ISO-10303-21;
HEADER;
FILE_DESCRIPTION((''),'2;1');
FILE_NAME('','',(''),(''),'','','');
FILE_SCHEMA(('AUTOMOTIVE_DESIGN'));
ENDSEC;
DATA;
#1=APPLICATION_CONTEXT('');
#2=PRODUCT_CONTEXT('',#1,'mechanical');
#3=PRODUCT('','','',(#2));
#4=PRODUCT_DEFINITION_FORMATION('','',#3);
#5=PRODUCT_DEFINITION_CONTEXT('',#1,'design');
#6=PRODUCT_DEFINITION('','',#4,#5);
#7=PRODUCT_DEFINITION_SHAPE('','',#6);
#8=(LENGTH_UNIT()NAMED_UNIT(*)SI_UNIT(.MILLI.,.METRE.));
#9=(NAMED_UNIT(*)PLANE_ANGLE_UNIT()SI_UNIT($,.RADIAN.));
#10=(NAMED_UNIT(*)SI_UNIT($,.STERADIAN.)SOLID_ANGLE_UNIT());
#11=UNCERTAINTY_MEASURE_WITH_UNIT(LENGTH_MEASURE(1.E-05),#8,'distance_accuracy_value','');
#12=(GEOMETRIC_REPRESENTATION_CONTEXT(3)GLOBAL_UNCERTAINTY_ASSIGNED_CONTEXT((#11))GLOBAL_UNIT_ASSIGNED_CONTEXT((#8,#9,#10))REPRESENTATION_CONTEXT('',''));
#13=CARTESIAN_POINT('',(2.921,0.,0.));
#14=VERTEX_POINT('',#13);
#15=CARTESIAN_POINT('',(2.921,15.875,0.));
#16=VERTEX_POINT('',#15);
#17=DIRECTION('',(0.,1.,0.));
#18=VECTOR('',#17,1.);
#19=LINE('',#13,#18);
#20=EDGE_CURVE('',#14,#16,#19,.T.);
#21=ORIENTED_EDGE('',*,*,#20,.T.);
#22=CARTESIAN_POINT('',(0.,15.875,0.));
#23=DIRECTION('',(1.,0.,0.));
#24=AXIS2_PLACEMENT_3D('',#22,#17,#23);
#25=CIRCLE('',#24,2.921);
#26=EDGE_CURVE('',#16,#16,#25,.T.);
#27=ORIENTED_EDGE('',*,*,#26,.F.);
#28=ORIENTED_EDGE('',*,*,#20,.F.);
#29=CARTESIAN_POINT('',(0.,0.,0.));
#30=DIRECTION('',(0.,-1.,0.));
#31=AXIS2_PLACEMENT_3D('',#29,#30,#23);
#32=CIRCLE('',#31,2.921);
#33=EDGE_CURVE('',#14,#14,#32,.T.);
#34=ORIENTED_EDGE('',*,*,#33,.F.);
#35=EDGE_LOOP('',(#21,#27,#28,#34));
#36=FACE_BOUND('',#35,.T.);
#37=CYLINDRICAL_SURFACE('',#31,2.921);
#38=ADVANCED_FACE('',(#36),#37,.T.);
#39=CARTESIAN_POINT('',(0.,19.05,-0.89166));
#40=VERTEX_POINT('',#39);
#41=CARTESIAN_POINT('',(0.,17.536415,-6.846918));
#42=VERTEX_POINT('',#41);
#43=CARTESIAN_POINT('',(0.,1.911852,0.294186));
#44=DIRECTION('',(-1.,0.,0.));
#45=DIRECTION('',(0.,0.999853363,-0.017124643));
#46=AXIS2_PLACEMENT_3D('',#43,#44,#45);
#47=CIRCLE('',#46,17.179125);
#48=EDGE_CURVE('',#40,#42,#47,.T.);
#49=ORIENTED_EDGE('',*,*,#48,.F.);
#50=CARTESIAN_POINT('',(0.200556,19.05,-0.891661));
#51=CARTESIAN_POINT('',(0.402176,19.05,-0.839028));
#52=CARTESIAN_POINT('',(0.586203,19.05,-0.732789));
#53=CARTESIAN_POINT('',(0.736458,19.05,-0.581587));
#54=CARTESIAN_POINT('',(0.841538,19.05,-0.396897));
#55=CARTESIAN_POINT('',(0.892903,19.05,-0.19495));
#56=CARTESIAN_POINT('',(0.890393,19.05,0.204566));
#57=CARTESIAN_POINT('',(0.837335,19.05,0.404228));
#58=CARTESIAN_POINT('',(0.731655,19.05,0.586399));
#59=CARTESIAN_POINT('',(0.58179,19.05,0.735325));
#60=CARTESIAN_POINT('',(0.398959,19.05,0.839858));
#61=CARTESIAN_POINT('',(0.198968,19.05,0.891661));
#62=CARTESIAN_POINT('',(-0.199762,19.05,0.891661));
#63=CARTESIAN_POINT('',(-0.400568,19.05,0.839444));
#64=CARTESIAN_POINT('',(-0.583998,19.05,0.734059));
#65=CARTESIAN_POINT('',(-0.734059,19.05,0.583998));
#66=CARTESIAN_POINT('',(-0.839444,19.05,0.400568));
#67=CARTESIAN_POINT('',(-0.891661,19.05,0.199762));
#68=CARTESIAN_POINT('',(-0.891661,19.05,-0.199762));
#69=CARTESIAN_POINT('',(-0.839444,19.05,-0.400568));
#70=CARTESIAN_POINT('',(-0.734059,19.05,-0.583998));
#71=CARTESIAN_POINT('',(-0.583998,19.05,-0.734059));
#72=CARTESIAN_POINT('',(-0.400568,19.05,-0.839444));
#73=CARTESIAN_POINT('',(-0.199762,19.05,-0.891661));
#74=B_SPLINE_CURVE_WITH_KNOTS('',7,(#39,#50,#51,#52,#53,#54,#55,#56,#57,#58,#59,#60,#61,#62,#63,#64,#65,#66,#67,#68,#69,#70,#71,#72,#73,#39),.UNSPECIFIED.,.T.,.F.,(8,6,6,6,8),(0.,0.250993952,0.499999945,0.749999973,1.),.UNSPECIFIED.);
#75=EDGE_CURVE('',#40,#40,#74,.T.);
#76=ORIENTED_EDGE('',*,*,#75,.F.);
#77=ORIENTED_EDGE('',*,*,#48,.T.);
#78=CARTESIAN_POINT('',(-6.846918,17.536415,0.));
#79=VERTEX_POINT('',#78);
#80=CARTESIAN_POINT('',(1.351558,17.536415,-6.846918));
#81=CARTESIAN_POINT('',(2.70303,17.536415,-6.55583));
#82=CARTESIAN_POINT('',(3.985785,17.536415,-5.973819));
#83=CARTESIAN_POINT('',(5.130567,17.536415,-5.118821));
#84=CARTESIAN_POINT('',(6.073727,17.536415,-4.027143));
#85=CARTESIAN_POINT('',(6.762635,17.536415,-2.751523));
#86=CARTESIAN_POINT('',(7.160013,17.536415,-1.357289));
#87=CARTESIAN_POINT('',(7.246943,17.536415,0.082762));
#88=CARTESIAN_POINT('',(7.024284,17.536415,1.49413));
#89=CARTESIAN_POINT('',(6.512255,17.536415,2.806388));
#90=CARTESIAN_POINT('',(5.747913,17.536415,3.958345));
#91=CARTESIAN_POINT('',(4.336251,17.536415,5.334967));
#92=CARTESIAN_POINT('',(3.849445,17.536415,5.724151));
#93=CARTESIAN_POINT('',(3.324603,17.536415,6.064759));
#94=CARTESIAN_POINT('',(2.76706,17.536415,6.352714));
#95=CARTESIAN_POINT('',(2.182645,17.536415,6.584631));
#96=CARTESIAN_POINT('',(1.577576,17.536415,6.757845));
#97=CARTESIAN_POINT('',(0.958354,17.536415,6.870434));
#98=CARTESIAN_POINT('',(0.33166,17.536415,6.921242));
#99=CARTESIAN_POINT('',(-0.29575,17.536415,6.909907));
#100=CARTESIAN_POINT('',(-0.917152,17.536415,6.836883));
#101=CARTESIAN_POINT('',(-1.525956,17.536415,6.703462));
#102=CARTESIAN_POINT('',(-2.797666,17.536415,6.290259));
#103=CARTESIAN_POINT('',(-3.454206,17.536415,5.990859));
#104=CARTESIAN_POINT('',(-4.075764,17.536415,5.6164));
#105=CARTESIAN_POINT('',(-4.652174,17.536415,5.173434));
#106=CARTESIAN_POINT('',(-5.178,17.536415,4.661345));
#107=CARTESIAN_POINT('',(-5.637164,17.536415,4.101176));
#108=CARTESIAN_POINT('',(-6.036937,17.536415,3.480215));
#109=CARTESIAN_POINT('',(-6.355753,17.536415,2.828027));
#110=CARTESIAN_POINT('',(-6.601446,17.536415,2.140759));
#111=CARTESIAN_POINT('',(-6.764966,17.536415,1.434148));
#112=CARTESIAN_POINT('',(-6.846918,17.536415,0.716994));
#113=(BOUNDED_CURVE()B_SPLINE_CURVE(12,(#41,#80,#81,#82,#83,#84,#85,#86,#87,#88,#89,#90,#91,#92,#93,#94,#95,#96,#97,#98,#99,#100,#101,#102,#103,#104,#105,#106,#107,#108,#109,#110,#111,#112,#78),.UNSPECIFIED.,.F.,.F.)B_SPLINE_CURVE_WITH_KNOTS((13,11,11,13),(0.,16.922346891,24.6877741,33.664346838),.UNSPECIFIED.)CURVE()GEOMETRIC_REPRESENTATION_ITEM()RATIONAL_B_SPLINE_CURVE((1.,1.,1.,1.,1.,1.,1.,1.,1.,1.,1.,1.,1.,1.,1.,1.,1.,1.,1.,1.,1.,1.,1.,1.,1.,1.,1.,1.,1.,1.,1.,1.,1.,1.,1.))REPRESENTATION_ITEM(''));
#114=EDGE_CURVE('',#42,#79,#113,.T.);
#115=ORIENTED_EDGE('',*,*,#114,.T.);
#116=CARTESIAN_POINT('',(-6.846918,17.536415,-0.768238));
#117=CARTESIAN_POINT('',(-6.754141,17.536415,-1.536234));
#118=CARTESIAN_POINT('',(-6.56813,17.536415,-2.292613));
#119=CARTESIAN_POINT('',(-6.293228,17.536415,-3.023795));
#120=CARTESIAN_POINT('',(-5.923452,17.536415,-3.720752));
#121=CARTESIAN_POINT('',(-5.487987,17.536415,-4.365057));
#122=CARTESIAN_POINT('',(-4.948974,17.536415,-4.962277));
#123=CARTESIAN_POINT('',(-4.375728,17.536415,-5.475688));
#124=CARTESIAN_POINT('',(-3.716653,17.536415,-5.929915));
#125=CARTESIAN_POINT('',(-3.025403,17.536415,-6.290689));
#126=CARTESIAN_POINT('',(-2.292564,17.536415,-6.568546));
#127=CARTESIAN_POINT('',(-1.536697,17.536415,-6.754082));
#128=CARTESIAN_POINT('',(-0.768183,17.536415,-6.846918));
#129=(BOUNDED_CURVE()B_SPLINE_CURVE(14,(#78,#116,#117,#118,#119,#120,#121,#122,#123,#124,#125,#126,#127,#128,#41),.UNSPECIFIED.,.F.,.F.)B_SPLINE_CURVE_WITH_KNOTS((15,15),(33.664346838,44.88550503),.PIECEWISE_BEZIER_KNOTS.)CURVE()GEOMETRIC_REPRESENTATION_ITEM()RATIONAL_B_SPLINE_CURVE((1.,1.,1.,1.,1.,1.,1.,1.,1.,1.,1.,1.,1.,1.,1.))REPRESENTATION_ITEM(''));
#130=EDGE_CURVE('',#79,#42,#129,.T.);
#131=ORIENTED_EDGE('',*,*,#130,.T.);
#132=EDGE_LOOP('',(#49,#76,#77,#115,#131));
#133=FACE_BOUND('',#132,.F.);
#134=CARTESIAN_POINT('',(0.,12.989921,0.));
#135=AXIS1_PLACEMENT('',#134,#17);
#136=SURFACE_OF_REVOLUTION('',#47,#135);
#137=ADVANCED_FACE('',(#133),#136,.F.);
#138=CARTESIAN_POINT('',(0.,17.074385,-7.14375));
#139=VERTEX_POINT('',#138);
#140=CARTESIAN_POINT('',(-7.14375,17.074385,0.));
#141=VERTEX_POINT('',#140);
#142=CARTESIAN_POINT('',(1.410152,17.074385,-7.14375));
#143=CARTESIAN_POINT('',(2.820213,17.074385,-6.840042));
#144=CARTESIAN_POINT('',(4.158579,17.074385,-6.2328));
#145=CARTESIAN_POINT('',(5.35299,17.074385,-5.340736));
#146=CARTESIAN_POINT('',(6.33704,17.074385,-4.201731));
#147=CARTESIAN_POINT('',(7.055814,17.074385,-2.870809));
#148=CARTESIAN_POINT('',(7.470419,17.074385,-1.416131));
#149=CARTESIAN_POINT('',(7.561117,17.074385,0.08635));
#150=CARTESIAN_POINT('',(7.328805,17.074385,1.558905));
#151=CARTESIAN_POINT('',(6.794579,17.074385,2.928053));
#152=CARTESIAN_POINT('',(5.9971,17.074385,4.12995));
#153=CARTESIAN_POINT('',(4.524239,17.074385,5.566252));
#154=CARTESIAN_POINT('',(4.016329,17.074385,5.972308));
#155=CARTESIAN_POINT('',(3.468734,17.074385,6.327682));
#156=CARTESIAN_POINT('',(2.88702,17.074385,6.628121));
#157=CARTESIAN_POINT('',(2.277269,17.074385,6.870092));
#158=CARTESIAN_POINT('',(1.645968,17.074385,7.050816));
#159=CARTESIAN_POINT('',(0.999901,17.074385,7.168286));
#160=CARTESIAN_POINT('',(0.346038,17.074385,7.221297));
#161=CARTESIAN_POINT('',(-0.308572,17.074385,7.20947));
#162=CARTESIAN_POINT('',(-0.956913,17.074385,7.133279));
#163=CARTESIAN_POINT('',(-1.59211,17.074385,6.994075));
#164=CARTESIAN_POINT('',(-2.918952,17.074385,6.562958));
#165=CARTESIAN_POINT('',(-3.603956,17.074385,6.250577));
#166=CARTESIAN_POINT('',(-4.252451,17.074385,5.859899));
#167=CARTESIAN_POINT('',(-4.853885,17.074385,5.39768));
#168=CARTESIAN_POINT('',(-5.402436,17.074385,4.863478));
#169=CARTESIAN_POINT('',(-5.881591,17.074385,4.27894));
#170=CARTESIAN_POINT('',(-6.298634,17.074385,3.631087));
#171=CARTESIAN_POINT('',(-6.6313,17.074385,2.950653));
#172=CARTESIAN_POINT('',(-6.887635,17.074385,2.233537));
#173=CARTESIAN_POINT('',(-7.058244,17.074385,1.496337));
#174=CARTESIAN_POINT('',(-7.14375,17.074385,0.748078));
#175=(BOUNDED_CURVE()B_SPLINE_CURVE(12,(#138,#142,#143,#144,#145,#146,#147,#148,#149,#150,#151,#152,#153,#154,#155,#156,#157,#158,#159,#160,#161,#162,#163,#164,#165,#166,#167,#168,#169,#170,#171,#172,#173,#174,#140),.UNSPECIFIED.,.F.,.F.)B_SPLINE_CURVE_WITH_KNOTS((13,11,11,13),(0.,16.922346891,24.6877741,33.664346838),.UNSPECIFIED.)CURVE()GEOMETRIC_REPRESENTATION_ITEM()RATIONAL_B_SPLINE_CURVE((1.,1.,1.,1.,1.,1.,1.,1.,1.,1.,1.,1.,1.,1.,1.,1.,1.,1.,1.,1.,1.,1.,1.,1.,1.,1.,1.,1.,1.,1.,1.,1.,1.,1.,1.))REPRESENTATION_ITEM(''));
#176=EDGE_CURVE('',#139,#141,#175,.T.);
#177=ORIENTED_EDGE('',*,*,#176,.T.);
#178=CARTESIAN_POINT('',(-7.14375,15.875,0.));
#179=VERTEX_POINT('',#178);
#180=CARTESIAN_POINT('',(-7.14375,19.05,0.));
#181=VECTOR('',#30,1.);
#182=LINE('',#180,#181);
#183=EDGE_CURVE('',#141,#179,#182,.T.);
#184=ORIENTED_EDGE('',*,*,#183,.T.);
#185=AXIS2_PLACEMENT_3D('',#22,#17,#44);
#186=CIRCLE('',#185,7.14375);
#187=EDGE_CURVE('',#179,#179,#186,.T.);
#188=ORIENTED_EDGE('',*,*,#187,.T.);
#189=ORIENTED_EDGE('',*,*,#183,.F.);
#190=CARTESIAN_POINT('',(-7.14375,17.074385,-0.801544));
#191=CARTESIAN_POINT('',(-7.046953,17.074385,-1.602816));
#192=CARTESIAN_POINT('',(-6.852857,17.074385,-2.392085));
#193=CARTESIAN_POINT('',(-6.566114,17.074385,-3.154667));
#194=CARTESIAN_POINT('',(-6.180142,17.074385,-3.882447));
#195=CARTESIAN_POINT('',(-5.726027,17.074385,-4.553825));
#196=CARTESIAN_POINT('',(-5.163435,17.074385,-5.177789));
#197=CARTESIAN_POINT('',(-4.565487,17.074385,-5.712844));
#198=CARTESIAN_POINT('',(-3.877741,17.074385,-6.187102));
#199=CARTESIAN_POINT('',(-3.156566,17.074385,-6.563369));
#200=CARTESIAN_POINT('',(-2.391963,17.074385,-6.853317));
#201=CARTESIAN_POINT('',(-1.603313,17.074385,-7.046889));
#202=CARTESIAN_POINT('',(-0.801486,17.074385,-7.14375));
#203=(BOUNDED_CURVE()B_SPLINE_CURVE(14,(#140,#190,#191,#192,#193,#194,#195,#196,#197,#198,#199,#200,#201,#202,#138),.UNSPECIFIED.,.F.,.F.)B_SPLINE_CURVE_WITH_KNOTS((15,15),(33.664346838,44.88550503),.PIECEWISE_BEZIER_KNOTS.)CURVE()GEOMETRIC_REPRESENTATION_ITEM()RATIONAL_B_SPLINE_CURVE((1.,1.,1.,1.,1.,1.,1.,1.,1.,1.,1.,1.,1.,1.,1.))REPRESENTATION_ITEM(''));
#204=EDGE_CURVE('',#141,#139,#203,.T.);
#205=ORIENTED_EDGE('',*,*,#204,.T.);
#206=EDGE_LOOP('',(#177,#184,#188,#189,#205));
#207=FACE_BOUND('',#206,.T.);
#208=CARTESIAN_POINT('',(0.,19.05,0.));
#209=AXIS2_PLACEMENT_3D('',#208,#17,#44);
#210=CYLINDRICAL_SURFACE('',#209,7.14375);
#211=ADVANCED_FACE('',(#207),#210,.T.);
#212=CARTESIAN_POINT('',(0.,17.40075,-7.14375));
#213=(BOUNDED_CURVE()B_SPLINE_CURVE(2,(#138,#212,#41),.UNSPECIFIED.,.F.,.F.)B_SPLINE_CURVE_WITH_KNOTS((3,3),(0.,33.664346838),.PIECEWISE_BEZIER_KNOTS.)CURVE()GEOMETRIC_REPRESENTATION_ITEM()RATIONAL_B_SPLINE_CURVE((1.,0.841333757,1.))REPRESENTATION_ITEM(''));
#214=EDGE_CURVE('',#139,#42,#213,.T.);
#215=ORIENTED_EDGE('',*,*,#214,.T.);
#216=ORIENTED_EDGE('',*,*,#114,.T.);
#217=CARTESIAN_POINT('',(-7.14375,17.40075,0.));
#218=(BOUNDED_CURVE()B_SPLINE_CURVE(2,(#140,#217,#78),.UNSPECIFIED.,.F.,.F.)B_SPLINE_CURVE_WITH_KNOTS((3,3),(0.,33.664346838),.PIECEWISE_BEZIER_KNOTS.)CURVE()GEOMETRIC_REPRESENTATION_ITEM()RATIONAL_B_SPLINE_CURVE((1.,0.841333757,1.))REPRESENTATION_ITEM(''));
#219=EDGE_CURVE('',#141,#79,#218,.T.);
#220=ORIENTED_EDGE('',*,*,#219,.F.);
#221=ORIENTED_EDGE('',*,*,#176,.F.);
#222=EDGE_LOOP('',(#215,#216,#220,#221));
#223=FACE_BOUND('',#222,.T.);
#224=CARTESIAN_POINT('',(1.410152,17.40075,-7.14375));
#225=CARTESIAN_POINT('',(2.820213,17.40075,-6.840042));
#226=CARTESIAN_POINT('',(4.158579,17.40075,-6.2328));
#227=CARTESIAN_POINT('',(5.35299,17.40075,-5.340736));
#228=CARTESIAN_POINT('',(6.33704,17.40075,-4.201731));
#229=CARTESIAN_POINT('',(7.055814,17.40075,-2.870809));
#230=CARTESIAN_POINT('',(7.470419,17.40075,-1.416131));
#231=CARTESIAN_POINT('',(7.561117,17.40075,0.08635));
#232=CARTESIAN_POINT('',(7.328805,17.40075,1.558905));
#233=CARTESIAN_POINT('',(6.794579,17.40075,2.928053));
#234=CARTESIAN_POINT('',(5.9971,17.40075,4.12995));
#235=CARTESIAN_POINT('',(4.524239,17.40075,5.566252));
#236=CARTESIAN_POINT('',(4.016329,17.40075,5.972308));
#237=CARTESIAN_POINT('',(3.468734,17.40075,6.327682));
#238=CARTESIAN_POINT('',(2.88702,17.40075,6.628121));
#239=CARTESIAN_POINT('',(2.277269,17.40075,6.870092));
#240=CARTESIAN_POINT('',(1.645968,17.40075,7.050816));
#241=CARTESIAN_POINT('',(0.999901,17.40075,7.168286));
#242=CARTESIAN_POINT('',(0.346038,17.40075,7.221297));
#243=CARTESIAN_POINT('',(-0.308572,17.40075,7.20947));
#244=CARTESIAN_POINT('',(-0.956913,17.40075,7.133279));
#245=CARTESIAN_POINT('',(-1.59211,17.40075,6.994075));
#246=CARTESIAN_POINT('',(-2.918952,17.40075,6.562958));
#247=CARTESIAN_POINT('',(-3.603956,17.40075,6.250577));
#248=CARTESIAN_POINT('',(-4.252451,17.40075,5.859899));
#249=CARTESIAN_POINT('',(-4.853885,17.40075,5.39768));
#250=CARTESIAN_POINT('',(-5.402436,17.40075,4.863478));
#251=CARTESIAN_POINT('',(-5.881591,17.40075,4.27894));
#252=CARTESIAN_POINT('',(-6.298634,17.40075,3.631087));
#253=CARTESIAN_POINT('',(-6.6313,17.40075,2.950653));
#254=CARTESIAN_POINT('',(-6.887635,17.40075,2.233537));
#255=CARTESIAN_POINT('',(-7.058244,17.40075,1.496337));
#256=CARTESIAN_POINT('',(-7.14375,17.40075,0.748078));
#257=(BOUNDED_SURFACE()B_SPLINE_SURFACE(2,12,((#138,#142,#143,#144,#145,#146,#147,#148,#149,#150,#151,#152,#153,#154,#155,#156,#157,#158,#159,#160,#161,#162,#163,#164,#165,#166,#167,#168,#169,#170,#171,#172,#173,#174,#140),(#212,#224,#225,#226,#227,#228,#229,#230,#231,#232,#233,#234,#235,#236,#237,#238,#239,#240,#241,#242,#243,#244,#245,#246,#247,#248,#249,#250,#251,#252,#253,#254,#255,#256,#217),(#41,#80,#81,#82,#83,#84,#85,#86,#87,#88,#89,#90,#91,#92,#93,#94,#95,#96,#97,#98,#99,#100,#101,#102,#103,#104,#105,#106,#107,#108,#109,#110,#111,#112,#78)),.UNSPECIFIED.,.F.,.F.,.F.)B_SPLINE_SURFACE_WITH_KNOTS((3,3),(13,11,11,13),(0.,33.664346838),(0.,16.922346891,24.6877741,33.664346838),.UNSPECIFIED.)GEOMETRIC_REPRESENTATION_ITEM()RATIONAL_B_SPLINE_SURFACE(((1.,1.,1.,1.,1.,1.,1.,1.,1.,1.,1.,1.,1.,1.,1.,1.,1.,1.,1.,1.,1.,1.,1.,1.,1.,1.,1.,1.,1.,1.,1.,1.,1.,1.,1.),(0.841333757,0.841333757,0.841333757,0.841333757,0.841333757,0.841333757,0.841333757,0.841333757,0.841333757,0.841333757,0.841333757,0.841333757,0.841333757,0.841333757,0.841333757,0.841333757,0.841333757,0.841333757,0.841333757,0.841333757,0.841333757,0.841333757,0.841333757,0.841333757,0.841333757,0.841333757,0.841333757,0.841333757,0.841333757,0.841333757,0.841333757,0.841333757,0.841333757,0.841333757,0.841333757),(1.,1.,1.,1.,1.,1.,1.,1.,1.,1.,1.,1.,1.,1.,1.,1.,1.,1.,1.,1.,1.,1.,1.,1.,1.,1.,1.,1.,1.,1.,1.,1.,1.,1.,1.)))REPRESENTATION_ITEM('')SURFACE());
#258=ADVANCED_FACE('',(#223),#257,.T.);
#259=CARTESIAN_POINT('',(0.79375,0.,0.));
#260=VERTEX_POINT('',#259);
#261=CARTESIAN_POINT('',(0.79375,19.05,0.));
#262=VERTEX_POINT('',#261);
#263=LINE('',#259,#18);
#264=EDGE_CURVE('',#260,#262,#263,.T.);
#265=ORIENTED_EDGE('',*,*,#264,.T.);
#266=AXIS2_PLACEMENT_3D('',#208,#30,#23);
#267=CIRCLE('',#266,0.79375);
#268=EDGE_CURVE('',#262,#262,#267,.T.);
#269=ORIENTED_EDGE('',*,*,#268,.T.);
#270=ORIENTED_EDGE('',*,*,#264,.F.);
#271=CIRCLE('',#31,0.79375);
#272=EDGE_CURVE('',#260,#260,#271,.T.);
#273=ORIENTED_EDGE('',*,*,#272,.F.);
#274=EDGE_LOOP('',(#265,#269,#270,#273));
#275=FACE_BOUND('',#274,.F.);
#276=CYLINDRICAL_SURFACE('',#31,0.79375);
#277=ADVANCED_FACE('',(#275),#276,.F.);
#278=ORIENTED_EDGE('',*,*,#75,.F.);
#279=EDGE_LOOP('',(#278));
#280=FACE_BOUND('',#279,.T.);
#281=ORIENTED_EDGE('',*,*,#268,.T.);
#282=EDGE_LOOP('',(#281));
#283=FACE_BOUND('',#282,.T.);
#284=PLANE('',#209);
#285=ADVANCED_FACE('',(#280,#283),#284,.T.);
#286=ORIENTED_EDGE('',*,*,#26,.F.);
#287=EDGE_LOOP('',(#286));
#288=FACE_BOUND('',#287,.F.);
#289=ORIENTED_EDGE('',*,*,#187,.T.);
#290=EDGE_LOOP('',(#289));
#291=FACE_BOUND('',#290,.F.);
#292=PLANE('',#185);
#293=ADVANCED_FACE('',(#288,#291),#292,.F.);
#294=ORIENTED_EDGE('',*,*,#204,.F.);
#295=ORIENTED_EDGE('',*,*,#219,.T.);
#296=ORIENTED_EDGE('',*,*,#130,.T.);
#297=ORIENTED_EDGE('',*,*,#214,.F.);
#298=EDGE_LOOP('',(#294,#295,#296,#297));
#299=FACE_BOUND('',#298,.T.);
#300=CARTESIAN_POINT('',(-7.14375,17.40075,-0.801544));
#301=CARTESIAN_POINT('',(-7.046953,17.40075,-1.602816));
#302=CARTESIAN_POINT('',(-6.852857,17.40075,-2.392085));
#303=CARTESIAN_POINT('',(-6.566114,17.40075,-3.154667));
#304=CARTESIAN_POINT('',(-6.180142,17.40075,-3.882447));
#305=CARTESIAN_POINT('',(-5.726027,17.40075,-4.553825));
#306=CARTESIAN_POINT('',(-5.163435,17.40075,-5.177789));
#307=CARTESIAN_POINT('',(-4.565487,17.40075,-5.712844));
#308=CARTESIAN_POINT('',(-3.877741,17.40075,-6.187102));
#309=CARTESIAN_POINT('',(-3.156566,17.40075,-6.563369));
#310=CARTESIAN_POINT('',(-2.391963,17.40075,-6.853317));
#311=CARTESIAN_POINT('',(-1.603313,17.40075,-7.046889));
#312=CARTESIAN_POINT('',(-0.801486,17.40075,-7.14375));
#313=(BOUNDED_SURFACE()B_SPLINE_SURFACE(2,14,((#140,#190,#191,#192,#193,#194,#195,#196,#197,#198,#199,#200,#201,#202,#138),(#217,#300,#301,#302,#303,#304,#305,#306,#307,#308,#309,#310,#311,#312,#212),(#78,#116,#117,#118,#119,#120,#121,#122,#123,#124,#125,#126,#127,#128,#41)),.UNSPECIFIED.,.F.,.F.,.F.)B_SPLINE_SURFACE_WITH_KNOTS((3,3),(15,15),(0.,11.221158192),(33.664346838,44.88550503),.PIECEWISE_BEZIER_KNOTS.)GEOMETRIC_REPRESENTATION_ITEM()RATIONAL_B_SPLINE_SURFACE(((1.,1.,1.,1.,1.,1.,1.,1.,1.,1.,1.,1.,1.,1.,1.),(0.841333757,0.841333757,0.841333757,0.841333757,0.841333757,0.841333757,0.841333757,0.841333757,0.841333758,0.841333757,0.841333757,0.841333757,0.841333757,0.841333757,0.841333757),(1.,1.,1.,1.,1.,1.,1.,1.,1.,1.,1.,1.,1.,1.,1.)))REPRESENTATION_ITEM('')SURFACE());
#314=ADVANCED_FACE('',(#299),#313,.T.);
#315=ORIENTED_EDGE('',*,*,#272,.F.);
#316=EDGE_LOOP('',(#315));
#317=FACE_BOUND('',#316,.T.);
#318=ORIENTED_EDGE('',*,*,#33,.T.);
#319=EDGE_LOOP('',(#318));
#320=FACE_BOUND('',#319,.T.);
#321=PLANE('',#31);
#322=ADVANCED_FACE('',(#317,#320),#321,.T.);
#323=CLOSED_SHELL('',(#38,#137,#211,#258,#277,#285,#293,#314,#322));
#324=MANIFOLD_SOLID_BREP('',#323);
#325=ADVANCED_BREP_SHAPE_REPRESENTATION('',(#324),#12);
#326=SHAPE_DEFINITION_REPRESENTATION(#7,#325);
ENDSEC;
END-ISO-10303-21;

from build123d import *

# Parameters (mm, degrees)
F0_R     = 2.921
F1_DEPTH = 19.05
F2_R     = 7.14375
F2_R_2   = 2.921
F3_DEPTH = 3.175
F4_R     = 0.79375
F5_DEPTH = 19.051
F8_R     = 0.508


# Not quite as in the source:
# - a feature names something its author has since deleted; it is built from what else it names


with BuildPart() as f1:
    # F0 (on Front) → F1 (new body)
    with BuildSketch(Plane.XZ):
        Circle(F0_R)
    extrude(amount=-F1_DEPTH)

    # F2 (on face) → F3 (join)
    with BuildSketch(Plane(origin=(0, 19.05, 0), x_dir=(-1, 0, 0), z_dir=(0, 1, 0))):
        Circle(F2_R)
        Circle(F2_R_2, mode=Mode.SUBTRACT)
    extrude(amount=-F3_DEPTH)

    # F4 (on face) → F5 (cut, through all)
    with BuildSketch(Plane.XZ):
        Circle(F4_R)
    extrude(amount=-F5_DEPTH, mode=Mode.SUBTRACT)

    # F6 (on Right) → F7 (revolve, cut)
    with BuildSketch(Plane.YZ):
        with BuildLine():
            ThreePointArc((19.0884582698, 0), (18.6124325104, -3.7323455074), (17.335280776, -7.2715384886))
            Line((17.335280776, -7.2715384886), (21.6284582698, -7.2715384886))
            Line((21.6284582698, -7.2715384886), (21.6284582698, 0))
            Line((21.6284582698, 0), (19.0884582698, 0))
        make_face()
    revolve(axis=Axis((0, 12.9899214953, 0), (0, 1, 0)), mode=Mode.SUBTRACT)

    # F8
    f8_edges = [f1.edges().sort_by_distance(p)[0] for p in [
        (5.051394, 17.397311, 5.051394),
        (-5.051394, 17.397311, -5.051394),
    ]]
    fillet(f8_edges, radius=F8_R)


solid = f1.part
